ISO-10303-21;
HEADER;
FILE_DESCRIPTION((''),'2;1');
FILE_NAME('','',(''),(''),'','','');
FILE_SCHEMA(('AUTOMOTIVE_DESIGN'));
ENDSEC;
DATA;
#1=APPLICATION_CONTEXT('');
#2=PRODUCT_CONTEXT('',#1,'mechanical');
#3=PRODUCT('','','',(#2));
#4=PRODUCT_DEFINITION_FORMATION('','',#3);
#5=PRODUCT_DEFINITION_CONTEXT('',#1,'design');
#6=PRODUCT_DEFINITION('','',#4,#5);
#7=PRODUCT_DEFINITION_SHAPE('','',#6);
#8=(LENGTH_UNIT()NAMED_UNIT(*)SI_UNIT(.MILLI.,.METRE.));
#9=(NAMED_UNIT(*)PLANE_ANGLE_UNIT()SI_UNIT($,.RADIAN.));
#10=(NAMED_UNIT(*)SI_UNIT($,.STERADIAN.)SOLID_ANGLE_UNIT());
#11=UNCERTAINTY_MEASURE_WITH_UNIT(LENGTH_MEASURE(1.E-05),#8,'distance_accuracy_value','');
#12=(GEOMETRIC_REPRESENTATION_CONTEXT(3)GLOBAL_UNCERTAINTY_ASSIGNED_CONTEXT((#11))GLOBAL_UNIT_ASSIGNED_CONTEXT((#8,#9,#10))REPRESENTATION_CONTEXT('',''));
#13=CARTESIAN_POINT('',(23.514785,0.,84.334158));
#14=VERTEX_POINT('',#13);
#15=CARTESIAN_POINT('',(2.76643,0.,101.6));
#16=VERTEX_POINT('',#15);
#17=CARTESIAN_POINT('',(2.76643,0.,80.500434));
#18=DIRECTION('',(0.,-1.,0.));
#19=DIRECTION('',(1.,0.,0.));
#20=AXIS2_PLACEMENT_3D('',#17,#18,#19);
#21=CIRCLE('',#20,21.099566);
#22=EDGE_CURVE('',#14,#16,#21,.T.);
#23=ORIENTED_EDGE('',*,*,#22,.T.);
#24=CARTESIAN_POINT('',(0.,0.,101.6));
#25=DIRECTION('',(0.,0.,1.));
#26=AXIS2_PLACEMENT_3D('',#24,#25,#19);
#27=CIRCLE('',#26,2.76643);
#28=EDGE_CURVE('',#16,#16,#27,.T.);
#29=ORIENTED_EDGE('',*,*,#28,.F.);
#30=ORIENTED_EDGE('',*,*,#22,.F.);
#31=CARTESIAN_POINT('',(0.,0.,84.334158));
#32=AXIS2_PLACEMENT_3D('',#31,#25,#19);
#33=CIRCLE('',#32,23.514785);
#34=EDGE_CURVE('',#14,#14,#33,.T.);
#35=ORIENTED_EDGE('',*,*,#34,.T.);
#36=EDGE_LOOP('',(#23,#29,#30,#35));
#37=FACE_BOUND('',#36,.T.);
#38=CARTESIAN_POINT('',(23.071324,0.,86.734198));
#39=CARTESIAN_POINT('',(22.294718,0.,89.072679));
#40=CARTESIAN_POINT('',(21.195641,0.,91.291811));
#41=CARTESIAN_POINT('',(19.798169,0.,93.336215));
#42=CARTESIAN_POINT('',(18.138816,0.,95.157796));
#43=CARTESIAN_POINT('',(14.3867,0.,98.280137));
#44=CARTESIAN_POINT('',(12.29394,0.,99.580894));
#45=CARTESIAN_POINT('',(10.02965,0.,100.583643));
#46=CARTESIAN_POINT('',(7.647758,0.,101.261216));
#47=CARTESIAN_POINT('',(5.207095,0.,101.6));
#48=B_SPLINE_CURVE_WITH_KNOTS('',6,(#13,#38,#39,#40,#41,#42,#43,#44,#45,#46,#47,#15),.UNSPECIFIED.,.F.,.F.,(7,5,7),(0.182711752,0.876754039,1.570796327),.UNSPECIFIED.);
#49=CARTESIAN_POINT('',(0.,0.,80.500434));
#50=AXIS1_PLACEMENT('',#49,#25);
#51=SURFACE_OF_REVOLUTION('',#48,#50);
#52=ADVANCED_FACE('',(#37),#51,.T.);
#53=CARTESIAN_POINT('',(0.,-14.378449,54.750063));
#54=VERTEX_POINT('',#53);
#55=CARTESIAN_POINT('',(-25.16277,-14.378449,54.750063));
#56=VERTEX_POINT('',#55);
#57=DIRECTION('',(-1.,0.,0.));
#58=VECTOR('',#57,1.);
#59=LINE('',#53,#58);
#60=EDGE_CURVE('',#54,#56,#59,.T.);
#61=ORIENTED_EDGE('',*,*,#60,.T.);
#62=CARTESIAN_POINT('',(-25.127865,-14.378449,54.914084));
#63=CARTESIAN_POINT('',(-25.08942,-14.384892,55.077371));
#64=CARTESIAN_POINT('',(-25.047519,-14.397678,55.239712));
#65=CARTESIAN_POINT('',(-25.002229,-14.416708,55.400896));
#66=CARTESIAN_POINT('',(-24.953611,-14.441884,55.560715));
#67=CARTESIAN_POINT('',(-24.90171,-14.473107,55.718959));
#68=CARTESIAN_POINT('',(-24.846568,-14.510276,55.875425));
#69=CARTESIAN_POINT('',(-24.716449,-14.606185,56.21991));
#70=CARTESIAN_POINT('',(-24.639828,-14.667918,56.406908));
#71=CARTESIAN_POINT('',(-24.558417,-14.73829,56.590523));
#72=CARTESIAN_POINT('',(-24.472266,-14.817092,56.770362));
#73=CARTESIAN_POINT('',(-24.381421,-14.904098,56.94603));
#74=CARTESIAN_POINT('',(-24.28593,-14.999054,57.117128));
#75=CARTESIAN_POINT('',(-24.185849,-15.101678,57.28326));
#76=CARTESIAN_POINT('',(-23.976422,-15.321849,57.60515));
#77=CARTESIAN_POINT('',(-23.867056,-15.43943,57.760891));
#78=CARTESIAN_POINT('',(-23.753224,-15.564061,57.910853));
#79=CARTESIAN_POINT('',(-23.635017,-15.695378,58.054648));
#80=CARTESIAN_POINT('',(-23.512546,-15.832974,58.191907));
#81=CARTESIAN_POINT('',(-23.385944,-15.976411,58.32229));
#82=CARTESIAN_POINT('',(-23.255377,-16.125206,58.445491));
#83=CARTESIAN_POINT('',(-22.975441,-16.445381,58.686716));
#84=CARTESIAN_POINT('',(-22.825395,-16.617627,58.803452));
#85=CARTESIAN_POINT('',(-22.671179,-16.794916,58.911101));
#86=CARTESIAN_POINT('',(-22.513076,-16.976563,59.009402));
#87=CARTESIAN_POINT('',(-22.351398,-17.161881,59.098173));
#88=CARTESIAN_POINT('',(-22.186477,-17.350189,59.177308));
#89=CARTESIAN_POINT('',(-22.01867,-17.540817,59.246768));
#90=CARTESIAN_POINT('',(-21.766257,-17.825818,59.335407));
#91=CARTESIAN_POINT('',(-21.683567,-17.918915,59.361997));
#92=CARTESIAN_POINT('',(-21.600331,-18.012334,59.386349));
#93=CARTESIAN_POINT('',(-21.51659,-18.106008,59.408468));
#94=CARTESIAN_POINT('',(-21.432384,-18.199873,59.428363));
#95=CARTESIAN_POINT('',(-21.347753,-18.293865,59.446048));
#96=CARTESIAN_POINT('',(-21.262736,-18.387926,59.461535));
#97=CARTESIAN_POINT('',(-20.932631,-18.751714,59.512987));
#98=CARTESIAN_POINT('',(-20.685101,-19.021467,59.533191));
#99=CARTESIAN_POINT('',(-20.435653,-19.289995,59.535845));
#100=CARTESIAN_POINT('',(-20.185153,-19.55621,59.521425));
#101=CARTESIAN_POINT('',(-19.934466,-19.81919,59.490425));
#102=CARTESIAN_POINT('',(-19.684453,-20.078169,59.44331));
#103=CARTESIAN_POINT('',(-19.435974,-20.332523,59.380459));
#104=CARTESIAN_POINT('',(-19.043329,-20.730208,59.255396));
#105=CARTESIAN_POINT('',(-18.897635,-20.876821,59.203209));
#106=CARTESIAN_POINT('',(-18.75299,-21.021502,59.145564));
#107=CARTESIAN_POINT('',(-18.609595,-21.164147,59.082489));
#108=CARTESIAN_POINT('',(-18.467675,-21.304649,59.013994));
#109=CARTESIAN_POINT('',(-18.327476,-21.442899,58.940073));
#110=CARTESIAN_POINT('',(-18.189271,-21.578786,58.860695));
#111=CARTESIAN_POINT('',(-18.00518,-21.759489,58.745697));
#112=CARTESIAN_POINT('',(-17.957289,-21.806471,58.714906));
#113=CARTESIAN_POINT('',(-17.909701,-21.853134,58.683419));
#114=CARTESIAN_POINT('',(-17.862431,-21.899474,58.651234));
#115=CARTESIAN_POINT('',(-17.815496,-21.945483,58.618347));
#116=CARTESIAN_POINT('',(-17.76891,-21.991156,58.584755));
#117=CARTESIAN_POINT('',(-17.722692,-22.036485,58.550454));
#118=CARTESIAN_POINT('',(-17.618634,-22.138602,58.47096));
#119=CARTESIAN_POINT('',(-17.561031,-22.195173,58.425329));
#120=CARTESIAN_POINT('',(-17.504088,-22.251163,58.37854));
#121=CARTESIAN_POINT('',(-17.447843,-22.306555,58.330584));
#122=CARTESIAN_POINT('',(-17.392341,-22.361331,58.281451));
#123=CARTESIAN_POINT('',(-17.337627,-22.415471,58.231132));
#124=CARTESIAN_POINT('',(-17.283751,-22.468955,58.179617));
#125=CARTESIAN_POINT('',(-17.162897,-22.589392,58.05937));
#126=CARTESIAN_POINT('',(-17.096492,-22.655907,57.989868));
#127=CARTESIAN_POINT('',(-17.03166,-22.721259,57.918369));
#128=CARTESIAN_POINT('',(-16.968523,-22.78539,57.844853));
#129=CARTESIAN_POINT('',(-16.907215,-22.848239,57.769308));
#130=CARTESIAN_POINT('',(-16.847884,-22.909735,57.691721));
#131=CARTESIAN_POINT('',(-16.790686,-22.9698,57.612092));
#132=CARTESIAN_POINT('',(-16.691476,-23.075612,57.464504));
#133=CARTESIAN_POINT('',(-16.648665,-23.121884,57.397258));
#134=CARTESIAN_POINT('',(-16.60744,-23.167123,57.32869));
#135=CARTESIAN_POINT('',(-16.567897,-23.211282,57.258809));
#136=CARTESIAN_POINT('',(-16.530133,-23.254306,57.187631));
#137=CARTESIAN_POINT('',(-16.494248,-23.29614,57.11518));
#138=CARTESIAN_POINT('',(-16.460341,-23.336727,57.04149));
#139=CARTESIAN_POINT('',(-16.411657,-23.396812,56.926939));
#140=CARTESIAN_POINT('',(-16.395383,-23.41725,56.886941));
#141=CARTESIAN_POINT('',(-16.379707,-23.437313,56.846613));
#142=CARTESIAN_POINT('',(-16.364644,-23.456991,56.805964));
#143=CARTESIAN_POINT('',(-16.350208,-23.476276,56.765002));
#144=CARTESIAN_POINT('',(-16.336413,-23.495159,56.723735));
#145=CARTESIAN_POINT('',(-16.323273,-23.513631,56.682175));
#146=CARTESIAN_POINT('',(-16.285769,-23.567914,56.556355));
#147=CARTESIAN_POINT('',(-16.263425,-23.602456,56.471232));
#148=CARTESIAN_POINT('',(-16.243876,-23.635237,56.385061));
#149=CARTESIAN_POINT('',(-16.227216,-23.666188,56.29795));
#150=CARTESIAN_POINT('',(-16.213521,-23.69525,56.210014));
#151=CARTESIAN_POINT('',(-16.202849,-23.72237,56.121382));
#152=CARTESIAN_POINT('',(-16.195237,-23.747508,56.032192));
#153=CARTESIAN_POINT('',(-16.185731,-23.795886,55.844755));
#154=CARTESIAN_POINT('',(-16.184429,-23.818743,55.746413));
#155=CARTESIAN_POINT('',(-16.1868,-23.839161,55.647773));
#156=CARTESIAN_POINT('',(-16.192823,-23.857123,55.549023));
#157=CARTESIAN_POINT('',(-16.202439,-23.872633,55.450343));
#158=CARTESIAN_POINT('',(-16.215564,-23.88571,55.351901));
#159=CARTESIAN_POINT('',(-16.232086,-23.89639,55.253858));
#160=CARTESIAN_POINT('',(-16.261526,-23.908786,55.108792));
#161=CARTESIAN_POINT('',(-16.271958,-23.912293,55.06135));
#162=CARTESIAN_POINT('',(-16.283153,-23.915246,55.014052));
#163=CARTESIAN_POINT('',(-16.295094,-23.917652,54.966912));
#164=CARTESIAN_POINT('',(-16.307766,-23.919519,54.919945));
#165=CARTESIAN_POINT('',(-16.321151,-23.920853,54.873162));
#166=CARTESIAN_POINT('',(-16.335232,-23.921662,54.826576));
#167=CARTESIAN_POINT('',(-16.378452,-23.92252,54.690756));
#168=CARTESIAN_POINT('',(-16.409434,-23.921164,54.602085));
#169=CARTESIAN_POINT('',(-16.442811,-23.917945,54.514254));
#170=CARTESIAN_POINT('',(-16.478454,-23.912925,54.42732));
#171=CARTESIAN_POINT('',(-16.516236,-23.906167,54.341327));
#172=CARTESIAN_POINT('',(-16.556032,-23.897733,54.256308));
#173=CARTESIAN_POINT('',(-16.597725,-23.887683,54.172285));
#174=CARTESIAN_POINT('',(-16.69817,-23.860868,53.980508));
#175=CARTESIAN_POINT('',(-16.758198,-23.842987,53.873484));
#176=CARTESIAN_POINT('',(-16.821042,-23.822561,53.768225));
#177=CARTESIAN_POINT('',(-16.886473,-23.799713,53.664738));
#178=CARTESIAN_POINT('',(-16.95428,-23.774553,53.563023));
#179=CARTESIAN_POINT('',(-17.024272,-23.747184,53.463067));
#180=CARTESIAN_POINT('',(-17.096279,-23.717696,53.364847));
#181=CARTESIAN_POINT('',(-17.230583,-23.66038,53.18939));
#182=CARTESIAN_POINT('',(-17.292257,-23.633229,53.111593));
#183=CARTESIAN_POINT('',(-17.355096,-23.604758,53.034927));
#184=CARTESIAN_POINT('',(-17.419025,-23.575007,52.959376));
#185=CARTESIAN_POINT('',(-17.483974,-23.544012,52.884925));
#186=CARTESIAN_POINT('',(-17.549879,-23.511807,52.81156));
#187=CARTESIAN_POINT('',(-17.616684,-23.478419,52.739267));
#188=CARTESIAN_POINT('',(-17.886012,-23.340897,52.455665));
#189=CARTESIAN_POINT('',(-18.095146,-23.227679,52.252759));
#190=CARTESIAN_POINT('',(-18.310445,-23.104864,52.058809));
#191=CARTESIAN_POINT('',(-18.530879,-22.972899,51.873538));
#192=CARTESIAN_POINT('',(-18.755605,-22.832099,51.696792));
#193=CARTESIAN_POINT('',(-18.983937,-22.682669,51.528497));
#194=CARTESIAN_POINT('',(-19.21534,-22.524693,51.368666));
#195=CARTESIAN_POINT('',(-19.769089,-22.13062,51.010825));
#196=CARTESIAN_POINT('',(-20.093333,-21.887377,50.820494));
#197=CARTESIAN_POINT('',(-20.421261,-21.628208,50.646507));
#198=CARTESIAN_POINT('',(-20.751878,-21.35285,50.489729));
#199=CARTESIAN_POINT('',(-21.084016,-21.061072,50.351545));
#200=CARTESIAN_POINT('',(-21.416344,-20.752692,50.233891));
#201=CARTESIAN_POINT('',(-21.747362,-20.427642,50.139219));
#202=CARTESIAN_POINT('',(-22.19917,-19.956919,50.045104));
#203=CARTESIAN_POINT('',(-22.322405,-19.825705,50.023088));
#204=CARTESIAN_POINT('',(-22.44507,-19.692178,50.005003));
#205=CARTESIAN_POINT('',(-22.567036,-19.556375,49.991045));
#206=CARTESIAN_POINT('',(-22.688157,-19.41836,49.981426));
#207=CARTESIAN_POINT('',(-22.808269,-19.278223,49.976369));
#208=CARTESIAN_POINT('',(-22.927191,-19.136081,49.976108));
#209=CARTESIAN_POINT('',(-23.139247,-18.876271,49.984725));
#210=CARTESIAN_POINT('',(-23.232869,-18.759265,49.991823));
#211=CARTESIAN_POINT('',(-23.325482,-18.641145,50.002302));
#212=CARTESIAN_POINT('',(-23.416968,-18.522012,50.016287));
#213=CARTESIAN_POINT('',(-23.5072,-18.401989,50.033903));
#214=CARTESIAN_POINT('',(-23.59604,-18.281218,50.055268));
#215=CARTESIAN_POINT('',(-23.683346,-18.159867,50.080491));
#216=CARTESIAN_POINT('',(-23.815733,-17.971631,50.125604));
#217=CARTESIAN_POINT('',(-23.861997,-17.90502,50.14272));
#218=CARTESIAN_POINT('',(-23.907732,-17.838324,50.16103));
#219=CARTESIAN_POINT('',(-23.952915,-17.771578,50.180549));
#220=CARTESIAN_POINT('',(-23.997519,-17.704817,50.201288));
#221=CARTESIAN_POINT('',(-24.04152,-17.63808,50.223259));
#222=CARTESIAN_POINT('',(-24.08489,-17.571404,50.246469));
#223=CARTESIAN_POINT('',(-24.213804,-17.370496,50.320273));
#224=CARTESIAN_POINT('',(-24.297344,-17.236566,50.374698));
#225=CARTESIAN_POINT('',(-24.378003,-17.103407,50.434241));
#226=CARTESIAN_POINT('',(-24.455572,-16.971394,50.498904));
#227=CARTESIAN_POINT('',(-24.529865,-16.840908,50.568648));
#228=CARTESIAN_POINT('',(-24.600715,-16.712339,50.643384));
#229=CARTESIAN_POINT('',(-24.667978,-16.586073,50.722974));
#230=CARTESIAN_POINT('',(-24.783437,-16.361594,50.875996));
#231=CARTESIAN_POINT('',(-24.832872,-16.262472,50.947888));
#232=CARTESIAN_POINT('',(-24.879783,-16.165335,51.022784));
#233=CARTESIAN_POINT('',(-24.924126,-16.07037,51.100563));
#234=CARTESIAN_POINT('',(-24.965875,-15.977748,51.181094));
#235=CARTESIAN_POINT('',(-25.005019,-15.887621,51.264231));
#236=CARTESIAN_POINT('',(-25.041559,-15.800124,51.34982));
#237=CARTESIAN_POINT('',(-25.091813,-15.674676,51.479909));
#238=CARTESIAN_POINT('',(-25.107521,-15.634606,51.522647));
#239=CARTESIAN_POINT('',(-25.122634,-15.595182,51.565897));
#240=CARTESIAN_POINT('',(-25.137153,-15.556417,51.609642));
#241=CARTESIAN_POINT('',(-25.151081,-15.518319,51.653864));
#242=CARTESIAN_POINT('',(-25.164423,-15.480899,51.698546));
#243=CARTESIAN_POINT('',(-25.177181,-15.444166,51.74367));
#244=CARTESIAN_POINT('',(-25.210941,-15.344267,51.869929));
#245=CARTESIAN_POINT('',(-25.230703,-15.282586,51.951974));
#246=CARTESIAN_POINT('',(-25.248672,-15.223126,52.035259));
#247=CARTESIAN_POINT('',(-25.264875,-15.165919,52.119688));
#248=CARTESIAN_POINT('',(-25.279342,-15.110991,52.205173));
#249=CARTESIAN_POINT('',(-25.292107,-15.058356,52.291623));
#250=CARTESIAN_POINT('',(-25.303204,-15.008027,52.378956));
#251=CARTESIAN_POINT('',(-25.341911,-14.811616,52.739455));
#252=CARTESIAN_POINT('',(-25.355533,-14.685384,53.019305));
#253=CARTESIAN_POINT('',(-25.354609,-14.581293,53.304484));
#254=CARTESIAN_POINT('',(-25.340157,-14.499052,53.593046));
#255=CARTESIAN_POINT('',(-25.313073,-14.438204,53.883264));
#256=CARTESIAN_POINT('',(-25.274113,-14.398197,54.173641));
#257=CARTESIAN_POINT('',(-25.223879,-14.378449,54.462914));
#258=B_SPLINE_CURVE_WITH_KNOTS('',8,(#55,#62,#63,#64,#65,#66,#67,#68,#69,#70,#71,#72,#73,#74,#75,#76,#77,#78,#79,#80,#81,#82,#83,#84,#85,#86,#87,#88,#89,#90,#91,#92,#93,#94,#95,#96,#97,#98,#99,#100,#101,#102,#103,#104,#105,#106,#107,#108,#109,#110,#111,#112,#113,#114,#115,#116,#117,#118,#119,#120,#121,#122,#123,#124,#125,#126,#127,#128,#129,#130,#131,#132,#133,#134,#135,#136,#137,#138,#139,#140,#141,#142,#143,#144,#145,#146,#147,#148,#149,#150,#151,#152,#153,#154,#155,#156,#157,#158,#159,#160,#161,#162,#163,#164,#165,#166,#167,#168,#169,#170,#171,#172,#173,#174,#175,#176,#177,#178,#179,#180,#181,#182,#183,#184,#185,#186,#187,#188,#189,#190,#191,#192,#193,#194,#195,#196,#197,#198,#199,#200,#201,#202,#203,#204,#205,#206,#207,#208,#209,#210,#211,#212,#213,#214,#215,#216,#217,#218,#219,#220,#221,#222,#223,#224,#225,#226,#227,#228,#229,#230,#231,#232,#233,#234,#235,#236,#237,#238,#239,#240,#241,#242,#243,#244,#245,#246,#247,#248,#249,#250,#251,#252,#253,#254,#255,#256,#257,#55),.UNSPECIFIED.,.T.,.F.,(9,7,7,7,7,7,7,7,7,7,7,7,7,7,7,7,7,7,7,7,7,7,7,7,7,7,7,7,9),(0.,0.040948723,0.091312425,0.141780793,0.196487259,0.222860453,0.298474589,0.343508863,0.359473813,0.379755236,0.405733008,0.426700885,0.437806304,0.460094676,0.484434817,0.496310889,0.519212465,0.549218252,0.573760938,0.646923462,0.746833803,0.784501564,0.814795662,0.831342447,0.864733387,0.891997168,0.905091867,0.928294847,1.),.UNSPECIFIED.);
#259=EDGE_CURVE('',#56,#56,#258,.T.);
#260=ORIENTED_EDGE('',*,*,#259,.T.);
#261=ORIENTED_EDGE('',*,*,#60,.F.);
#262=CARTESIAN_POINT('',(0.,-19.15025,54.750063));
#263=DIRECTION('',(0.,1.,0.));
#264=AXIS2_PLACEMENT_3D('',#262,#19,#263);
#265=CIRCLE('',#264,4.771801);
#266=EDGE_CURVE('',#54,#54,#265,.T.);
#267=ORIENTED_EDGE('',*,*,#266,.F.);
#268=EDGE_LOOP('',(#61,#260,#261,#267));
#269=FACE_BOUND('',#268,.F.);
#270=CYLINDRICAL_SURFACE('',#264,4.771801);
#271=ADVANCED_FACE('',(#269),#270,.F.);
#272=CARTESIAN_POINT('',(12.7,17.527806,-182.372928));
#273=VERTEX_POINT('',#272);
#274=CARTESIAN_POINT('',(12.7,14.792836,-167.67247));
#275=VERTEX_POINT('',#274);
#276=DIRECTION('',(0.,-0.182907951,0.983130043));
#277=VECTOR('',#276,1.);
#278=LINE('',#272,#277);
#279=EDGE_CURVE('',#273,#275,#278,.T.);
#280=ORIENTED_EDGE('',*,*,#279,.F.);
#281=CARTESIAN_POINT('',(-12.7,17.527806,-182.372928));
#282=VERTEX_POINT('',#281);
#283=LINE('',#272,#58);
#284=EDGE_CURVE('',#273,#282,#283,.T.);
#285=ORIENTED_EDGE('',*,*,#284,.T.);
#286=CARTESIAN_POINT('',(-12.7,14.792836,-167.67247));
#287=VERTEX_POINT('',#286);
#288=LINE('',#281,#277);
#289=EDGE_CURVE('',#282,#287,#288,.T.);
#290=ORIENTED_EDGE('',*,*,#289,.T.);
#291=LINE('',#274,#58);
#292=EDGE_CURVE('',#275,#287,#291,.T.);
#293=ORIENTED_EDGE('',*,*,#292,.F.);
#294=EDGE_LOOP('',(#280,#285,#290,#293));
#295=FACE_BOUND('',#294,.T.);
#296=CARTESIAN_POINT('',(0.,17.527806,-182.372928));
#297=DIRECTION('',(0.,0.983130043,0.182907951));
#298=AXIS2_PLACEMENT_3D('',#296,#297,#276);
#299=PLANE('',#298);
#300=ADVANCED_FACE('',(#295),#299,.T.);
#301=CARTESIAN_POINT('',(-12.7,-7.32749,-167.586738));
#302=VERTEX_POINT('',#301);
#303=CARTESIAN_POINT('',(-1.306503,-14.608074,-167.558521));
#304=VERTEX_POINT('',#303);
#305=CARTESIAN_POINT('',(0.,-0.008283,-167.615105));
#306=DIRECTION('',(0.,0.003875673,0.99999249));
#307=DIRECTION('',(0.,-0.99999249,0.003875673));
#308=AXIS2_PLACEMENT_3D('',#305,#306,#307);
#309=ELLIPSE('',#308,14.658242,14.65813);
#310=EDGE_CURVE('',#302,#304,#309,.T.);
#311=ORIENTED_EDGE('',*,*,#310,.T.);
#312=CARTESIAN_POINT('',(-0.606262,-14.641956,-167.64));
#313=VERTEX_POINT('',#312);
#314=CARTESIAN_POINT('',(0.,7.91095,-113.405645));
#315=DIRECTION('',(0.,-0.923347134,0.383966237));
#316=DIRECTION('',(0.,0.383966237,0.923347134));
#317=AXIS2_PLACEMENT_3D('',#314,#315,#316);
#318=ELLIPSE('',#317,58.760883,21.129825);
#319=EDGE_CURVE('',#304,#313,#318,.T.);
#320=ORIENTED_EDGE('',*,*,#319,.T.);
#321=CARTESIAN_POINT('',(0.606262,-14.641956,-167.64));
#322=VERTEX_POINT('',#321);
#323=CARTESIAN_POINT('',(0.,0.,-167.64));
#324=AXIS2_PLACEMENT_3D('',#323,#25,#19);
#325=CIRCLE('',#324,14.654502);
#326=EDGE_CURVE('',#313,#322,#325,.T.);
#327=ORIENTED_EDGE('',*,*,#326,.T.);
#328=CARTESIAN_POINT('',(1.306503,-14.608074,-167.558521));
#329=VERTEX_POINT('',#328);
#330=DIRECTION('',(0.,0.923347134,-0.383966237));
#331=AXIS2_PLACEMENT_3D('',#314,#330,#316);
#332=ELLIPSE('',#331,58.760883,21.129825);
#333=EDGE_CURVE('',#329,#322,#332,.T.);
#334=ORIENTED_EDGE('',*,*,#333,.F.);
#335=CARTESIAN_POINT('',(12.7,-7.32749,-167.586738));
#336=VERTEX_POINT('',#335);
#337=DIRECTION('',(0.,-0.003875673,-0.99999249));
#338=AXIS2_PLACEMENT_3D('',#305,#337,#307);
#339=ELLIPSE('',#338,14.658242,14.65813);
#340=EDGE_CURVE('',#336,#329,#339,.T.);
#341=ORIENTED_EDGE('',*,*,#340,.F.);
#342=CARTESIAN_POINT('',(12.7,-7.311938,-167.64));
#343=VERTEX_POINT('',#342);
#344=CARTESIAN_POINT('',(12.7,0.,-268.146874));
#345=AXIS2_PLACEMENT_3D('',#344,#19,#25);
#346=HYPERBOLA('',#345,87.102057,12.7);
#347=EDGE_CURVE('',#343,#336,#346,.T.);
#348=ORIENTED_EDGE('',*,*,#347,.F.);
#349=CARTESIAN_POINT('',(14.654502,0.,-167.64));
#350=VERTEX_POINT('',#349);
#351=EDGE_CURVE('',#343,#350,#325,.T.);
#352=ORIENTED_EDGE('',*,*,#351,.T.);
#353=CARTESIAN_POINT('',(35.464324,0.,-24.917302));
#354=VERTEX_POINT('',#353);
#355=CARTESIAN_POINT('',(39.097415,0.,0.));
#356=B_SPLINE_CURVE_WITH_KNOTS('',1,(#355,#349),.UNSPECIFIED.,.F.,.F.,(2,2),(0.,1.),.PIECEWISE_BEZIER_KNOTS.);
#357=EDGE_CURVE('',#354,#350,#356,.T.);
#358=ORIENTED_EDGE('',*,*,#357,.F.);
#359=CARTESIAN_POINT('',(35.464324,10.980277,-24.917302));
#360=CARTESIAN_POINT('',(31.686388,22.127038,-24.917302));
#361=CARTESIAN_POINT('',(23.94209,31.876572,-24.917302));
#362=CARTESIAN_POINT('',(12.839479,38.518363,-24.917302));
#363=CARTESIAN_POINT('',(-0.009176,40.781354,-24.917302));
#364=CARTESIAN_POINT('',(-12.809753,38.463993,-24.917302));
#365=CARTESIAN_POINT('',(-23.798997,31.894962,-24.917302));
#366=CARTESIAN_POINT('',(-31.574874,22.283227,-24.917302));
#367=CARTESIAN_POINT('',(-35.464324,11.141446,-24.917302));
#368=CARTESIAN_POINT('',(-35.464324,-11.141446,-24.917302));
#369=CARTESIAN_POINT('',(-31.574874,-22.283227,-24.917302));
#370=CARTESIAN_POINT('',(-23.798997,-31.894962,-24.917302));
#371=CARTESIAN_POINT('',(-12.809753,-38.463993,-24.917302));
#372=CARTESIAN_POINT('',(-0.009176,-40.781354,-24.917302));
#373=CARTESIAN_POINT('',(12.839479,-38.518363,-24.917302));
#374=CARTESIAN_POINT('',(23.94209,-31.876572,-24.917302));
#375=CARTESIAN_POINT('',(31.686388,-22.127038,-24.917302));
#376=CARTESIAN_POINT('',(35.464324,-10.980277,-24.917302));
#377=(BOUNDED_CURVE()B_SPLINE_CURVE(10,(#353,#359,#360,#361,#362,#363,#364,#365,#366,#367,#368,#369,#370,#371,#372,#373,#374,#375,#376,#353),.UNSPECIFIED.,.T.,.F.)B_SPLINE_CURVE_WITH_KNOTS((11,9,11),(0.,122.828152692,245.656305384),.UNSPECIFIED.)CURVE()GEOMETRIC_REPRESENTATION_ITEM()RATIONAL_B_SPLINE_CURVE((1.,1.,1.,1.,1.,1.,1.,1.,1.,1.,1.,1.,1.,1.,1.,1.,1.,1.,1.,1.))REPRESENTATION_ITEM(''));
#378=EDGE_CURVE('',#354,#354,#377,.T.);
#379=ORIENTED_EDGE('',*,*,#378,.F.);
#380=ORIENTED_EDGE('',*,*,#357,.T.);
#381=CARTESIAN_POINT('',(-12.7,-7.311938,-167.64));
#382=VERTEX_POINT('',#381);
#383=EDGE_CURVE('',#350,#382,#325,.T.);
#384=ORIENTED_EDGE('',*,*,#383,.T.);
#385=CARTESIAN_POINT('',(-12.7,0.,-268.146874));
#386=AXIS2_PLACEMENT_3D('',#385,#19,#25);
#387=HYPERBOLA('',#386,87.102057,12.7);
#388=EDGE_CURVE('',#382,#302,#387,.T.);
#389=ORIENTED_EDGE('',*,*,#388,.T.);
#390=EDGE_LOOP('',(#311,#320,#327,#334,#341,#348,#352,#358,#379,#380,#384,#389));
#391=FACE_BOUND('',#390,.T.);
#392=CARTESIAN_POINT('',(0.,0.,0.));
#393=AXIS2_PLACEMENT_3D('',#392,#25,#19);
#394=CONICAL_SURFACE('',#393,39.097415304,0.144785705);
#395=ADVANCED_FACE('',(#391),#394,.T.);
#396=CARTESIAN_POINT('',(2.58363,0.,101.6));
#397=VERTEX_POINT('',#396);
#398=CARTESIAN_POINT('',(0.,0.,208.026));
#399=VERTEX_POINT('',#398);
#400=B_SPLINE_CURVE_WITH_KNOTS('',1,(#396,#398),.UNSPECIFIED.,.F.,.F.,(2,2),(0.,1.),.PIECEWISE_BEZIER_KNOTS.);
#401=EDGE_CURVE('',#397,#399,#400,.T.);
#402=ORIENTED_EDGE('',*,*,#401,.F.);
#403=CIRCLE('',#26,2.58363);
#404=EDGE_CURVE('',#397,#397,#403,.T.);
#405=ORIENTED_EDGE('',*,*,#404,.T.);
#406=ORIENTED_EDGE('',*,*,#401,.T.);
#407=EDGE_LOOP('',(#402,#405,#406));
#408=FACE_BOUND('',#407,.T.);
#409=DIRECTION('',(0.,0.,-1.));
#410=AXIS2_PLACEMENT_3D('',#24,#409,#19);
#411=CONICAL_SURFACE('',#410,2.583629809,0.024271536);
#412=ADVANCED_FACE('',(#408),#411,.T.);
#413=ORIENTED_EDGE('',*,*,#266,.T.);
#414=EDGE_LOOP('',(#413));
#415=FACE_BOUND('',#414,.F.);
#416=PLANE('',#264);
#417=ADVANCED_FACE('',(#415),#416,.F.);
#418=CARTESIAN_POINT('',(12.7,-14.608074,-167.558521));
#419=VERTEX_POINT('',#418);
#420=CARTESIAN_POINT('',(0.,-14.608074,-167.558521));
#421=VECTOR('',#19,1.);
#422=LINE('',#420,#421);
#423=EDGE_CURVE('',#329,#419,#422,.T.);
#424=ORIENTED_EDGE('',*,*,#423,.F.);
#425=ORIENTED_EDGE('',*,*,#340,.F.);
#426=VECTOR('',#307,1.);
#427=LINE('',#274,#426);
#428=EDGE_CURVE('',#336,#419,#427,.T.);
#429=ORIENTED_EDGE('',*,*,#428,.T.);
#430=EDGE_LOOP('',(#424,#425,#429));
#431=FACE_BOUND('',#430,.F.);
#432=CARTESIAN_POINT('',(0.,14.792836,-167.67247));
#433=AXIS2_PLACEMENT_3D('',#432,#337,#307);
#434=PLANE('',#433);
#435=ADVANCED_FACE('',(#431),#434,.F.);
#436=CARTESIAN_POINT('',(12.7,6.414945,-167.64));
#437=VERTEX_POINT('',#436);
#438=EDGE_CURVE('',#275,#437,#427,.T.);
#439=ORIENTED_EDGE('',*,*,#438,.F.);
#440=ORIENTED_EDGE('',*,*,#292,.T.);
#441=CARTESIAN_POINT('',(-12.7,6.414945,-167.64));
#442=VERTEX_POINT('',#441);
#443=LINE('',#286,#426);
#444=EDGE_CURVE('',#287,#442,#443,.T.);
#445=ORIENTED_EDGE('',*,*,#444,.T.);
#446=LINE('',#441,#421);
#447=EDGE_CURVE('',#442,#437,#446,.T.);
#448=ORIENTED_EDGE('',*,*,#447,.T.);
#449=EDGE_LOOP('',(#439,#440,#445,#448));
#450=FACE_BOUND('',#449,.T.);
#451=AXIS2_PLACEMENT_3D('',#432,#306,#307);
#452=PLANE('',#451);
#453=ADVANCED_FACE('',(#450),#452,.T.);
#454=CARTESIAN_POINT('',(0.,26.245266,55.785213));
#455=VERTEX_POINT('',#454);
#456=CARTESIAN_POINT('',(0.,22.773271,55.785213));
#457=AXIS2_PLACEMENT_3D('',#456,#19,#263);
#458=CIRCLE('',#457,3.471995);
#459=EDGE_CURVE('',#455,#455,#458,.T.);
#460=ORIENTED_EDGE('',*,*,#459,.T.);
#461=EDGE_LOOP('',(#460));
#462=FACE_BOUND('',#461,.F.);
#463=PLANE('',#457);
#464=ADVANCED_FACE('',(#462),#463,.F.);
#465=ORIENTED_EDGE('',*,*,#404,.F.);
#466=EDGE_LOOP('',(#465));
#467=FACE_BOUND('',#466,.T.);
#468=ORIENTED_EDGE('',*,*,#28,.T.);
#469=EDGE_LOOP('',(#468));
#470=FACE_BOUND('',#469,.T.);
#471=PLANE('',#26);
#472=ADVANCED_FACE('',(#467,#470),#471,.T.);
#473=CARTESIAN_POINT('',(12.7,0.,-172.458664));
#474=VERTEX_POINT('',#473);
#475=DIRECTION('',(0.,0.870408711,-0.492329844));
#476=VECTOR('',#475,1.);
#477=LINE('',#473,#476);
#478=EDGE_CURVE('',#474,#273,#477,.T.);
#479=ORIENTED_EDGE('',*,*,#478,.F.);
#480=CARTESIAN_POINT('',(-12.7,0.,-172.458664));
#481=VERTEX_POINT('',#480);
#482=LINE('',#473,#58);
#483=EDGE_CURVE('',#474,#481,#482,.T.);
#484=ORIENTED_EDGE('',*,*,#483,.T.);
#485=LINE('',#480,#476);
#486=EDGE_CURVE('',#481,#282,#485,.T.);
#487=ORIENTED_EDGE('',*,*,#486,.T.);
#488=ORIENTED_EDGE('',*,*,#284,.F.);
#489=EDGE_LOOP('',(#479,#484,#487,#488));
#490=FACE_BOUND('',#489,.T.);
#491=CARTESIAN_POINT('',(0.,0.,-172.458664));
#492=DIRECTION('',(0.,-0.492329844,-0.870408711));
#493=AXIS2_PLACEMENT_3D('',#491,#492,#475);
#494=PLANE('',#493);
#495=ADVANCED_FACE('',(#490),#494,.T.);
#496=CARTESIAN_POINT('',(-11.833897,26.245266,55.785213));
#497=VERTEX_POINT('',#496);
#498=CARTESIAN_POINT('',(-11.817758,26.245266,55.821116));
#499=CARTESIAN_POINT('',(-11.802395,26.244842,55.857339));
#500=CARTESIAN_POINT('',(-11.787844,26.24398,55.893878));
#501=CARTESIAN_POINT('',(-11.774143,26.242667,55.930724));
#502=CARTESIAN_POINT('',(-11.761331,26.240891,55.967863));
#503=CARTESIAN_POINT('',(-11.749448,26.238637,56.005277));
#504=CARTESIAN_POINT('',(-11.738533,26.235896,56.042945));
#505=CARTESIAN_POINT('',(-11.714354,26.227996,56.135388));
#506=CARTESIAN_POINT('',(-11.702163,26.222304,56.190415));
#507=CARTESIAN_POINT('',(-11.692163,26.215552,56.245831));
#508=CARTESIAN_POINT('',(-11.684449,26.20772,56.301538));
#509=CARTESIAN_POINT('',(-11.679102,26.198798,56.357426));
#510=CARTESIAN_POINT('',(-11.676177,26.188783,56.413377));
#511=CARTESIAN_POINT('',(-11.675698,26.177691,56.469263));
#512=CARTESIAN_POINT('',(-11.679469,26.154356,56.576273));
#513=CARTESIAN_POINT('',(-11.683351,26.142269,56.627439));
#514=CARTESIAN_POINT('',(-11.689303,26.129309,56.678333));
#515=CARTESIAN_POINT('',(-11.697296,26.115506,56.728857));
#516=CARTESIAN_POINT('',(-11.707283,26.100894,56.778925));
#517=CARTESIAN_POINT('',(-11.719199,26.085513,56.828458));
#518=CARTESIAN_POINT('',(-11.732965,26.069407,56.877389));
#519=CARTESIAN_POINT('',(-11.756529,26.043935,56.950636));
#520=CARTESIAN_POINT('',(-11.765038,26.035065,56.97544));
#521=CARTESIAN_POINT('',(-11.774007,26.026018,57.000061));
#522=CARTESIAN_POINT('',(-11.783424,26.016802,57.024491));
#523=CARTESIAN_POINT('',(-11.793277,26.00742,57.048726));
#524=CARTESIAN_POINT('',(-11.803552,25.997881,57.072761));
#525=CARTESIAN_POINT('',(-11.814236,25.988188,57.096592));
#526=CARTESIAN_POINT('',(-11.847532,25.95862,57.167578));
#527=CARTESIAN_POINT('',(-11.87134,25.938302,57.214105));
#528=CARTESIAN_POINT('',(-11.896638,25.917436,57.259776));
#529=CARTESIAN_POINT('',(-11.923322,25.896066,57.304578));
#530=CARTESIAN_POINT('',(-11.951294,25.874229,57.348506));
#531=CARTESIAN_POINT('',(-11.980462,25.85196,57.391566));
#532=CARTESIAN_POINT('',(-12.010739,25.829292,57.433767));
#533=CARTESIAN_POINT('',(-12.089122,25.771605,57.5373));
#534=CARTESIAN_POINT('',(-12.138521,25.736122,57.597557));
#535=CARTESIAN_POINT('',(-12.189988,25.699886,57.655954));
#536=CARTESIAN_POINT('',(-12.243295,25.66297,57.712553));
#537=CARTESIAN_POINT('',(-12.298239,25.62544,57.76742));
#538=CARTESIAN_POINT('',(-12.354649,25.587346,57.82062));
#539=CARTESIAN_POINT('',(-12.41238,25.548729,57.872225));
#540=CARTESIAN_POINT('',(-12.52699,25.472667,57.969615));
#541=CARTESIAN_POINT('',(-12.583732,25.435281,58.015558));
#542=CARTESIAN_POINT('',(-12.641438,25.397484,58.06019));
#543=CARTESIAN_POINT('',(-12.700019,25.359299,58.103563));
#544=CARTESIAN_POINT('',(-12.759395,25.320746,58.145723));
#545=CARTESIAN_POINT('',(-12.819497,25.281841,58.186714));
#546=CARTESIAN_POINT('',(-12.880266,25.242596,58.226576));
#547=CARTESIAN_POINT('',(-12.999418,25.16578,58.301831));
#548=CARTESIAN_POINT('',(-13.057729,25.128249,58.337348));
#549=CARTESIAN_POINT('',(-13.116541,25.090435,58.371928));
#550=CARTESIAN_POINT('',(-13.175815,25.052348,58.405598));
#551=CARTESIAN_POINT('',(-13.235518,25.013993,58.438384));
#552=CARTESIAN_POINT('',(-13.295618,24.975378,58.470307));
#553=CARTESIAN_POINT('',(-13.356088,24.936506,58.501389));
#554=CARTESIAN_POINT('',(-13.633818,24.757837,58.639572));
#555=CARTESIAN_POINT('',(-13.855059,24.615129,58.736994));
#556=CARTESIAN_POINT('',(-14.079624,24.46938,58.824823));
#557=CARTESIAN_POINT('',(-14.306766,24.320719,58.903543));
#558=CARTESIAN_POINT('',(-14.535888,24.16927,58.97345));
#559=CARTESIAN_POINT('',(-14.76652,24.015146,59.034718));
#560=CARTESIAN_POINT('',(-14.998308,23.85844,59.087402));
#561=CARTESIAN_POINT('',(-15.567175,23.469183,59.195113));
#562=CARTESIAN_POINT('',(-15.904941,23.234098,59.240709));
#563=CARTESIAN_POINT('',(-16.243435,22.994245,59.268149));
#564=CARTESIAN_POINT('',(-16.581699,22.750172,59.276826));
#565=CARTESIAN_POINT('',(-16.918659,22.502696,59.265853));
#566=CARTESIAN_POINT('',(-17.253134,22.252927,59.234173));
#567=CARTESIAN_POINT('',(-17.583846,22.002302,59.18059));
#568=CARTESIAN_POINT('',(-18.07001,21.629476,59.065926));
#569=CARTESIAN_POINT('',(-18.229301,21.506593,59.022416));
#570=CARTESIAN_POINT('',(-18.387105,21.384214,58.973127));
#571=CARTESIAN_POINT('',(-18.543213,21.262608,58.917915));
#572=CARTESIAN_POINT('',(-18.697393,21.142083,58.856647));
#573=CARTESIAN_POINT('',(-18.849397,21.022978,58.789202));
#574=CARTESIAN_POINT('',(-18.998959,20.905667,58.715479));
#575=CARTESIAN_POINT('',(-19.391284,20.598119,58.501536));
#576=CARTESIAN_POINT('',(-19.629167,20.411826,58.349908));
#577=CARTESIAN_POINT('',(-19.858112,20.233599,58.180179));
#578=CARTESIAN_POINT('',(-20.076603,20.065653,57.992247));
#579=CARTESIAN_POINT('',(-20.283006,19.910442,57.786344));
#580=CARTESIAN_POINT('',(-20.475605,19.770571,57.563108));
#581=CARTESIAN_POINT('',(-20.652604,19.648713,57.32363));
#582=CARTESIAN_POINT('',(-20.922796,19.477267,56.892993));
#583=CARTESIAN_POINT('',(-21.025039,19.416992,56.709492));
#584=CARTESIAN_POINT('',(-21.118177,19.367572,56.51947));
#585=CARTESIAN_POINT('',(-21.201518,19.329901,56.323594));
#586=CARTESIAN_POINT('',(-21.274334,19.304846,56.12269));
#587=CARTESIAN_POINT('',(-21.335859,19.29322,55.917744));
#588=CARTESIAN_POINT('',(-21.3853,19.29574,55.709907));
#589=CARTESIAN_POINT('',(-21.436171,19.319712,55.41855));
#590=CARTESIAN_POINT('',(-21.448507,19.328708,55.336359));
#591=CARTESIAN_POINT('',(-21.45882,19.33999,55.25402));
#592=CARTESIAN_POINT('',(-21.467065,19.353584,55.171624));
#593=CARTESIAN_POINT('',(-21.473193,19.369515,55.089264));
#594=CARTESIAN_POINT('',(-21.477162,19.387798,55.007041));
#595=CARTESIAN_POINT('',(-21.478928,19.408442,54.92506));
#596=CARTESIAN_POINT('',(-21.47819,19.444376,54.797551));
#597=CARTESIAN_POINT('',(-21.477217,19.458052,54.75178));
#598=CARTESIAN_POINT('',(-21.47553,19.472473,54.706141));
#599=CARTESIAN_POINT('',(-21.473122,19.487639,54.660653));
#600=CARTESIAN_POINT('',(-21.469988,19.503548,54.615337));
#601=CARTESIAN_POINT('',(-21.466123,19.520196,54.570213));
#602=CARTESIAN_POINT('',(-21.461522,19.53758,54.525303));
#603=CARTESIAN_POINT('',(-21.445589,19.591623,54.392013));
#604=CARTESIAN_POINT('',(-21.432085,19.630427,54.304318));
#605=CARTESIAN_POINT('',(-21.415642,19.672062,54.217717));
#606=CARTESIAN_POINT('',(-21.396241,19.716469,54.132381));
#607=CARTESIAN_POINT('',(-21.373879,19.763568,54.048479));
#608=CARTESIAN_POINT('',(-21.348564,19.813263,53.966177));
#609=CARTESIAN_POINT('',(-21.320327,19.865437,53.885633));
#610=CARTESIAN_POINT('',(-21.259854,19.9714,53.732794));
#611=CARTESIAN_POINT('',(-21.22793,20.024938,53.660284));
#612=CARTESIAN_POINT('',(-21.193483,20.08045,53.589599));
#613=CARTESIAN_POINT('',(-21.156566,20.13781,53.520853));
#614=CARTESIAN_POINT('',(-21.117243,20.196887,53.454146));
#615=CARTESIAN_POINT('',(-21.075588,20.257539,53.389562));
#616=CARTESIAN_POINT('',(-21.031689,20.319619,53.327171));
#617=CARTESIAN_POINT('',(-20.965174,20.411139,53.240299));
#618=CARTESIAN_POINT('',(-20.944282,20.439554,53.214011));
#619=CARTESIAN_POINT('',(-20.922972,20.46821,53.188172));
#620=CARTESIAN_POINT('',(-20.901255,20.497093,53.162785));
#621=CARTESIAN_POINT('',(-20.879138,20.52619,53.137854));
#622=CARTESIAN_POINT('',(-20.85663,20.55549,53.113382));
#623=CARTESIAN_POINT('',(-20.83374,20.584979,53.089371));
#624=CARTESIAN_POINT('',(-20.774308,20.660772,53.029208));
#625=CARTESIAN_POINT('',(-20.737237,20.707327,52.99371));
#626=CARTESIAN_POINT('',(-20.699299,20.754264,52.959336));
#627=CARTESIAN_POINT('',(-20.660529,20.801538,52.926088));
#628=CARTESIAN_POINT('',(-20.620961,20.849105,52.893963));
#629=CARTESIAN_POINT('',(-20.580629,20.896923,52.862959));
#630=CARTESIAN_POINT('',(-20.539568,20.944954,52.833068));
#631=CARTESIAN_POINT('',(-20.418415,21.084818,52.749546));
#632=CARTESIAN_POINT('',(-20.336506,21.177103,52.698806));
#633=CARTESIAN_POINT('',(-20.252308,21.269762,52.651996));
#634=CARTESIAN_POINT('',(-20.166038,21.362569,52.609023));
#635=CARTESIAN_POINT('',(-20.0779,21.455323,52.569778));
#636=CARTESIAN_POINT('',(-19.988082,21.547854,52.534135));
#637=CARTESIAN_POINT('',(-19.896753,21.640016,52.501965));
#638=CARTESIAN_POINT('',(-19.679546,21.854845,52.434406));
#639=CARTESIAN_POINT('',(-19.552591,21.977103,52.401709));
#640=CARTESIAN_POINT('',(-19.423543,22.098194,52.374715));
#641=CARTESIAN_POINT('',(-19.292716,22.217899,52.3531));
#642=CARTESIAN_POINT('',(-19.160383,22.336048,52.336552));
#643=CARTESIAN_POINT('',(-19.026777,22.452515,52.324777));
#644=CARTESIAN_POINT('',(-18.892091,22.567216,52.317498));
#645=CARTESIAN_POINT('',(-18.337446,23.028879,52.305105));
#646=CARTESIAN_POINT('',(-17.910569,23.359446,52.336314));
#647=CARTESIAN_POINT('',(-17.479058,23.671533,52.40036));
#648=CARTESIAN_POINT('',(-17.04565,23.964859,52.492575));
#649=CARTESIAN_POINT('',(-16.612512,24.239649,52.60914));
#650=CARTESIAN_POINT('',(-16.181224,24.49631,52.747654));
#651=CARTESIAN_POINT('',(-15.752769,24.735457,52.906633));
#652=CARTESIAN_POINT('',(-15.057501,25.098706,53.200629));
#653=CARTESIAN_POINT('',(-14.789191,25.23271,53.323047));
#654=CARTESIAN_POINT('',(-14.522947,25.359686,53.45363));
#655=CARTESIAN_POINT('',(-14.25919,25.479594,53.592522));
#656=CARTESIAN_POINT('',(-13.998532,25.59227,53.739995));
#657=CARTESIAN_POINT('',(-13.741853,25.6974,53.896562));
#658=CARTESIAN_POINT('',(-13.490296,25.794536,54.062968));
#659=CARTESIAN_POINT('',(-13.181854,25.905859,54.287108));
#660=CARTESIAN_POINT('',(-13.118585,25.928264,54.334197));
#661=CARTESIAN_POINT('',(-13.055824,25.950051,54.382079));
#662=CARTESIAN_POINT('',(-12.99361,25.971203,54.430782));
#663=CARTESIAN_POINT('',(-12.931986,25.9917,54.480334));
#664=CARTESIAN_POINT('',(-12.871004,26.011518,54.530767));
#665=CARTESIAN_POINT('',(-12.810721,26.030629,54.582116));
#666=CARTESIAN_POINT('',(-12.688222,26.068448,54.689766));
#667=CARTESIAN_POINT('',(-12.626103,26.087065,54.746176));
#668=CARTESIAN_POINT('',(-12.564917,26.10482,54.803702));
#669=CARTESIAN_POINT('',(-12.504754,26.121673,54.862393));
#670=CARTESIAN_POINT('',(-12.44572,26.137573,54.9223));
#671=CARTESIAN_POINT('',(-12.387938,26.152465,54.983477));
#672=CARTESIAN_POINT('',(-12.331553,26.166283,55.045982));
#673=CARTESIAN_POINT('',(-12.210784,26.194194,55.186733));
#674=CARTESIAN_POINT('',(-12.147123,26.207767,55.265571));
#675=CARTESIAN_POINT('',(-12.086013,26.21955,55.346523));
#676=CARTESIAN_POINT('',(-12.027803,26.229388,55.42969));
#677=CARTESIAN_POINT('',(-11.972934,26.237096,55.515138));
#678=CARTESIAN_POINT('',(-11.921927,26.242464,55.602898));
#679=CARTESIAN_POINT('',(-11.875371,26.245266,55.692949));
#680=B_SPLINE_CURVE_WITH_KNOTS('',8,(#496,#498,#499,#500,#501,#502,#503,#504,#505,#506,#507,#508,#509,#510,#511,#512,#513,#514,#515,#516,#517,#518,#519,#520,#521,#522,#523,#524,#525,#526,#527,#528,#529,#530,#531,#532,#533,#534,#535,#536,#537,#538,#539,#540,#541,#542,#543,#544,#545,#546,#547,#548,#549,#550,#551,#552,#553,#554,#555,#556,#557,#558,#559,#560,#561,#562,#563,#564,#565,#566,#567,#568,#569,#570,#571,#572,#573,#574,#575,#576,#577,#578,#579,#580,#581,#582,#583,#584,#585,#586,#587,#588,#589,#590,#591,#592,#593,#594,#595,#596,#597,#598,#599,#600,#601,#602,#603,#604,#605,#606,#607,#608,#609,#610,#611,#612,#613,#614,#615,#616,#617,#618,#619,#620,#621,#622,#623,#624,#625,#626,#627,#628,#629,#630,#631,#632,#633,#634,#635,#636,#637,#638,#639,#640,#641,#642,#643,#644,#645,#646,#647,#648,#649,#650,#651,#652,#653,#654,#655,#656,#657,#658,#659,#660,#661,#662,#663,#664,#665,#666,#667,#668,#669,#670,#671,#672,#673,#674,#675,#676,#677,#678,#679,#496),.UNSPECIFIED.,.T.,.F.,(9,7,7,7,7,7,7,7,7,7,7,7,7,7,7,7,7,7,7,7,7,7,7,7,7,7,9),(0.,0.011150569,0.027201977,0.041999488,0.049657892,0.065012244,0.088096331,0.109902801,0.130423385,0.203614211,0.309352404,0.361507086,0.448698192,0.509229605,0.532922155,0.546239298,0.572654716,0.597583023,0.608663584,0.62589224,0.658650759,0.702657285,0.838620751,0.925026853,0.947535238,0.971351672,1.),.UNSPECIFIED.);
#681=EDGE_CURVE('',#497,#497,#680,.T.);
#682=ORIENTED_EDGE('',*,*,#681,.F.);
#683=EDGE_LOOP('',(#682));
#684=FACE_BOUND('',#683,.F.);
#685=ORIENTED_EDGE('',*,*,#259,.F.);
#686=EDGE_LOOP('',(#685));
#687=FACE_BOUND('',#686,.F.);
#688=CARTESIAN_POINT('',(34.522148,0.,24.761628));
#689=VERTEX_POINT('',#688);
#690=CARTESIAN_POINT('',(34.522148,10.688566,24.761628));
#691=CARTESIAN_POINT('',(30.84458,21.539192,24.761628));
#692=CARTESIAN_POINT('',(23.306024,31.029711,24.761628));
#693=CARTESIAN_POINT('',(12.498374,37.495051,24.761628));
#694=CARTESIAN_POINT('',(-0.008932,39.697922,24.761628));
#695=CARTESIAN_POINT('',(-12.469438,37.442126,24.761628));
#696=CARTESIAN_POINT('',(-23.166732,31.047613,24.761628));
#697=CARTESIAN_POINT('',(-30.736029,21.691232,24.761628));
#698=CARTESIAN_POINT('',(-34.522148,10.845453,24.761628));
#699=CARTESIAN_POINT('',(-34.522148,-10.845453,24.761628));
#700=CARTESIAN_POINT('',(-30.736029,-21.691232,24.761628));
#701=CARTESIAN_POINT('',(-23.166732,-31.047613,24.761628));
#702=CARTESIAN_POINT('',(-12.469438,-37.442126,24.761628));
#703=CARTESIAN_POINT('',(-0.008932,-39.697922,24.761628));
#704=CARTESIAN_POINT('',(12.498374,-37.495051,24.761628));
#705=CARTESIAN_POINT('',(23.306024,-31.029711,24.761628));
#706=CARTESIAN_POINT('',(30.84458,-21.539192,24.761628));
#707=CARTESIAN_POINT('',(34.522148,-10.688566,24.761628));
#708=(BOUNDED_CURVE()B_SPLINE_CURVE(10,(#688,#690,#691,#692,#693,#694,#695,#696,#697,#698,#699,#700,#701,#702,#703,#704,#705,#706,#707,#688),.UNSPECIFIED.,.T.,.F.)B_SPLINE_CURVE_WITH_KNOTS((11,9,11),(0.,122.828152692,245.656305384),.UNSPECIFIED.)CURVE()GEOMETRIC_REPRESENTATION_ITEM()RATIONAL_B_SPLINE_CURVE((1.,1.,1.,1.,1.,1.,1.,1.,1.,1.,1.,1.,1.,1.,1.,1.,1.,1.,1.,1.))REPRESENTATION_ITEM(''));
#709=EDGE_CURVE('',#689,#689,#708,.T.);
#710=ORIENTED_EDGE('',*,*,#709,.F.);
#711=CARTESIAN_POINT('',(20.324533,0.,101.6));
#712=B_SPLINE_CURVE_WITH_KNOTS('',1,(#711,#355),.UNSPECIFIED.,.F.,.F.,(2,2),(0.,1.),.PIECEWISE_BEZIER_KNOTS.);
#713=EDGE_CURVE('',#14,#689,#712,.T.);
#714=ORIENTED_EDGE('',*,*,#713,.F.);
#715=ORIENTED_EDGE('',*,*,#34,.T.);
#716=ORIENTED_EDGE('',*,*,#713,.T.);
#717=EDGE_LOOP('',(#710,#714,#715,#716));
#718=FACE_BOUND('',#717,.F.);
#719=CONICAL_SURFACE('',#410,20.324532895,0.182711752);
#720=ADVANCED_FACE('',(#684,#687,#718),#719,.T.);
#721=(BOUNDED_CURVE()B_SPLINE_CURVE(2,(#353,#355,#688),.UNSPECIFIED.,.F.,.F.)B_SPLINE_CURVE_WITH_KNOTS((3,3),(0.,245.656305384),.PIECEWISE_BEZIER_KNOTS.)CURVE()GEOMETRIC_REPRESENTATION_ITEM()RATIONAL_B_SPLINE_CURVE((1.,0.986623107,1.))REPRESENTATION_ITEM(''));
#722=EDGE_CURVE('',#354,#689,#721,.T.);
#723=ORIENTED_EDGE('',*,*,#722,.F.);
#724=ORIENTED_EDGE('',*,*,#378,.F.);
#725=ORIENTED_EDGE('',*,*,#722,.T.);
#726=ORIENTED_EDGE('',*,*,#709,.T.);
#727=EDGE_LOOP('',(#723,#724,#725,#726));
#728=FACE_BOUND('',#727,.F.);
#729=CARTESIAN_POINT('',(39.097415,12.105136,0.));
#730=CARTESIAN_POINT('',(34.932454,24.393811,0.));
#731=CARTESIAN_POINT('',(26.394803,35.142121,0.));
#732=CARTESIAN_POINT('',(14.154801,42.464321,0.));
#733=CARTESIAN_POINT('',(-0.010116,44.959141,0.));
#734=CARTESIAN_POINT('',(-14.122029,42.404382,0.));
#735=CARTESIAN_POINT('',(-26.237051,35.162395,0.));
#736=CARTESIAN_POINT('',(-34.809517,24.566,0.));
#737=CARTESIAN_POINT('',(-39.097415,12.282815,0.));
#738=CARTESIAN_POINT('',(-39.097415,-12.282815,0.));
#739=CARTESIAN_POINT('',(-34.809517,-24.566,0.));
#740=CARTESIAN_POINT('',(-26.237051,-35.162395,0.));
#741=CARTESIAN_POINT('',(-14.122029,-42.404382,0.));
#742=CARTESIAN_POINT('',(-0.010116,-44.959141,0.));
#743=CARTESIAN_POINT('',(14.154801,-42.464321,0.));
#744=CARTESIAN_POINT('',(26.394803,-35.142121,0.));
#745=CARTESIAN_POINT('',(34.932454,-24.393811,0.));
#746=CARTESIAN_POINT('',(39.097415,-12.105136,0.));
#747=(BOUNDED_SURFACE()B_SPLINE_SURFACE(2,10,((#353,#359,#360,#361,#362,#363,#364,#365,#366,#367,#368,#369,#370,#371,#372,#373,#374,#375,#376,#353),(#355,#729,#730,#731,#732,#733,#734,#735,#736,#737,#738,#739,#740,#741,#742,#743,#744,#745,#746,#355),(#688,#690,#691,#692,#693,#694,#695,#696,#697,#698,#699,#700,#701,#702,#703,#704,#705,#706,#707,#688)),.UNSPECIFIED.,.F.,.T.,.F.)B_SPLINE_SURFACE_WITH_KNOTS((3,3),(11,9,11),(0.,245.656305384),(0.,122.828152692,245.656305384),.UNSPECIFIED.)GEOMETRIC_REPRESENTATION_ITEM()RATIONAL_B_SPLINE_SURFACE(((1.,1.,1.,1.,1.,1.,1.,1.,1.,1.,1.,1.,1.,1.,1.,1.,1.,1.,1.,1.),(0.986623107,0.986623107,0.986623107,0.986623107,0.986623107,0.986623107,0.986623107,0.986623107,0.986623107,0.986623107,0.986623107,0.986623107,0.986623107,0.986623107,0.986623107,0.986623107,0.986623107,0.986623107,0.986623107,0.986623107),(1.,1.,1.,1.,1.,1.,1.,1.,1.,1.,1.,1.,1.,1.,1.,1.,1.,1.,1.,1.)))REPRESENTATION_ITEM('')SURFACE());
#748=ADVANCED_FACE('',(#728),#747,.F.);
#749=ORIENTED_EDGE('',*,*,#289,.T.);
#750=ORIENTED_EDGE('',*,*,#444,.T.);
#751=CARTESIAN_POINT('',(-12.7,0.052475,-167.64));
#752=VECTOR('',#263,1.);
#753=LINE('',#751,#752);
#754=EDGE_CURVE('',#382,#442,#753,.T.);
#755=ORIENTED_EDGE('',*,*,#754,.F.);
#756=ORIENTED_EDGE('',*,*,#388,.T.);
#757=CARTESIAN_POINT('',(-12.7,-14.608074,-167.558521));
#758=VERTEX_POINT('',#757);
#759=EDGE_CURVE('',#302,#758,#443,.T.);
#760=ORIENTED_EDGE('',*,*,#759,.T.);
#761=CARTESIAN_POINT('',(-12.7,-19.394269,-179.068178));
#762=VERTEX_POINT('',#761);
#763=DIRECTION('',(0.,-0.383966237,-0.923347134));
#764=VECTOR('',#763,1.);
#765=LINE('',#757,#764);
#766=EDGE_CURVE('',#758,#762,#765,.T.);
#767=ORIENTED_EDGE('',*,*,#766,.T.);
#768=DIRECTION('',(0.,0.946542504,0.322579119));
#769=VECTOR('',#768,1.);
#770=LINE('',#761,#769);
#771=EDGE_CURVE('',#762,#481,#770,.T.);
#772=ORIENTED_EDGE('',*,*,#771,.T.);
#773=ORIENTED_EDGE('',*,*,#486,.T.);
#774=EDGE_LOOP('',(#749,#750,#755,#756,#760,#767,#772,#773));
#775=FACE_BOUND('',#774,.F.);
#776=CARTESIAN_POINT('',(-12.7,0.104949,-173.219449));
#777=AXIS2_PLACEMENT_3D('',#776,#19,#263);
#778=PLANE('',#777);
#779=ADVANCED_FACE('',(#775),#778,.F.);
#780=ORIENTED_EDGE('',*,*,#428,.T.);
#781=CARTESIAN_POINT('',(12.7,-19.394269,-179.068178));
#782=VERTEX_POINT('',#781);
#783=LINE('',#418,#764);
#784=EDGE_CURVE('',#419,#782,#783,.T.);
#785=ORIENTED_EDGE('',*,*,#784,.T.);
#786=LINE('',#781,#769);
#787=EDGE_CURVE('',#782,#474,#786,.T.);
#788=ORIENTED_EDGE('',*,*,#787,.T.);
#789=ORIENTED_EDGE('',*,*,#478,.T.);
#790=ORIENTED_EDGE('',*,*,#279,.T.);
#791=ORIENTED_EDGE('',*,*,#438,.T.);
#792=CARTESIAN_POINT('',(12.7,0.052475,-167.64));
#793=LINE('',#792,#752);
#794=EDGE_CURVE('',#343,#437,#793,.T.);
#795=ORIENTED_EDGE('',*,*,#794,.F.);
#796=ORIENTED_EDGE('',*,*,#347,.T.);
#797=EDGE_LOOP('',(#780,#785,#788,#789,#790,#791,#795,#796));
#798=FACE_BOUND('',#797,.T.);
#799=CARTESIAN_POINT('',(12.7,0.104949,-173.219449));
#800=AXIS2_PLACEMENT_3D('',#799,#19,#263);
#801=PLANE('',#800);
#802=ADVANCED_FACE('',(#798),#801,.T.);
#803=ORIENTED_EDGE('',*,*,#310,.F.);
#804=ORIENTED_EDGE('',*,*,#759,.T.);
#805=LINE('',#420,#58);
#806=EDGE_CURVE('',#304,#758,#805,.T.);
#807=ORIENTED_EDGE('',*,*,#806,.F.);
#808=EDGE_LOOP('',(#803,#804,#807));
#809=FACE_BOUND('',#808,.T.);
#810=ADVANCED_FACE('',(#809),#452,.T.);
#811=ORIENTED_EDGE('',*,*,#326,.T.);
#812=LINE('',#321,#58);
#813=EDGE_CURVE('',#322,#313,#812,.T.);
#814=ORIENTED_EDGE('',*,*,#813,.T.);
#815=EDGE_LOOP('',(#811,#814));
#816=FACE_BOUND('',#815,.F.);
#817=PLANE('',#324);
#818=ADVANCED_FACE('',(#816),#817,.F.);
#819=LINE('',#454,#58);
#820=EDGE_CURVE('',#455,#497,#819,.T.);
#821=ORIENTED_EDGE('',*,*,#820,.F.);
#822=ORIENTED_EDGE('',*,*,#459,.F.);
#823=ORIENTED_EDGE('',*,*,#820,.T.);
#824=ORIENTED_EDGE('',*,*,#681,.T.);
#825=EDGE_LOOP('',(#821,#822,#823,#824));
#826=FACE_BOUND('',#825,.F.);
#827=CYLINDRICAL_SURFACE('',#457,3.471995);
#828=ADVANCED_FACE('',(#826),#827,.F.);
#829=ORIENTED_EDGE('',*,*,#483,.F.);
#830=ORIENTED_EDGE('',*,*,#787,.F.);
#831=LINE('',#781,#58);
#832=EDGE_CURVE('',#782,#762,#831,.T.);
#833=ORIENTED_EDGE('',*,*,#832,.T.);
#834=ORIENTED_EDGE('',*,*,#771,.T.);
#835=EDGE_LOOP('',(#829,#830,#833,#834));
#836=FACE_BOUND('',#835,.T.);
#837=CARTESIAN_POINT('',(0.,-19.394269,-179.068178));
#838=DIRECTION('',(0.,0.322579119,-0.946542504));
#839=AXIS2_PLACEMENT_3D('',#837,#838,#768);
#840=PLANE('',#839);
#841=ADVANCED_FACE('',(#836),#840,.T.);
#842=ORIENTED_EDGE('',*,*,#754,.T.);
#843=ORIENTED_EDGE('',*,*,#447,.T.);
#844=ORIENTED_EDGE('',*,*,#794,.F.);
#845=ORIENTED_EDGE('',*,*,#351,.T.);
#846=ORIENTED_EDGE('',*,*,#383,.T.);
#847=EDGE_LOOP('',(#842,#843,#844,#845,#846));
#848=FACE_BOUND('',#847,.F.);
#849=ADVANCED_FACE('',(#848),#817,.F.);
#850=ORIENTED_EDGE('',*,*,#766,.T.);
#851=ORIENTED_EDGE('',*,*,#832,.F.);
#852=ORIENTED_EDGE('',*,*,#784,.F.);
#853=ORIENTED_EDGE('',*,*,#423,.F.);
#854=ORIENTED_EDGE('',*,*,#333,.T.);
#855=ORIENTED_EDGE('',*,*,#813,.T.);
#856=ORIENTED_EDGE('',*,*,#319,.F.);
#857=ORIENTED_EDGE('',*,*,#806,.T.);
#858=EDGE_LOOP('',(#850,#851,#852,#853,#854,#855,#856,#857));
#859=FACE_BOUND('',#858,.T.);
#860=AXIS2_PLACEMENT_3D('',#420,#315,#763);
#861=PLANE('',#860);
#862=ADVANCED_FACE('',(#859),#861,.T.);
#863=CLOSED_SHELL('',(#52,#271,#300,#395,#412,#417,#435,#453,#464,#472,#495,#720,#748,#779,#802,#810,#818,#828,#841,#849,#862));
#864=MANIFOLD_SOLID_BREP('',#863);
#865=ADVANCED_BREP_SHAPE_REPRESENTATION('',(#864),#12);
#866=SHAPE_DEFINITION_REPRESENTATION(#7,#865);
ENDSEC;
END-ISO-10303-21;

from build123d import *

# Parameters (mm, degrees)
F2_R      = 20.3245328948
F1_R      = 39.0974153035
F4_R      = 21.0995662857
F5_R      = 2.5836298092
F3_FACE_R = 39.0974153035
F10_R     = 14.6545023438
F12_R     = 152.4
F14_DEPTH = 12.7
F15_DEPTH = 12.7
F16_R     = 3.4719949567
F16_R_2   = 4.7718005113
F17_DEPTH = 25.4


with BuildPart() as f3:
    # F2 (on offset) → F3 section 0
    with BuildSketch(Plane.XY.offset(101.6)):
        Circle(F2_R)
    # F1 (on Top) → F3 section 1
    with BuildSketch(Plane.XY):
        Circle(F1_R)
    loft()

    # F4
    f4_edges = [f3.edges().sort_by_distance(p)[0] for p in [
        (-20.324533, 0, 101.6),
    ]]
    fillet(f4_edges, radius=F4_R)

    # F5 (on offset) → F8 section 0
    with BuildSketch(Plane.XY.offset(101.6), mode=Mode.PRIVATE) as f8_s0:
        Circle(F5_R)
    loft([f8_s0.sketch, Vertex(0, 0, 208.026)])

    # F3_face (on face) → F11 section 0
    with BuildSketch(Plane(origin=(0, 0, 0), x_dir=(1, 0, 0), z_dir=(0, 0, -1))):
        Circle(F3_FACE_R)
    # F10 (on offset) → F11 section 1
    with BuildSketch(Plane.XY.offset(-167.64)):
        Circle(F10_R)
    loft()

    # F12
    f12_edges = [f3.edges().sort_by_distance(p)[0] for p in [
        (-39.097415, 0, 0),
    ]]
    fillet(f12_edges, radius=F12_R)

    # F13 (on Right) → F14 (join)
    with BuildSketch(Plane.YZ):
        Polygon((14.7928362712, -167.672470212), (-14.6080739796, -167.5585210323), (-19.3942692131, -179.0681779385), (0, -172.4586635828), (17.5278056413, -182.3729276657), align=None)
    extrude(amount=F14_DEPTH)

    # F13 (on Right) → F15 (join)
    with BuildSketch(Plane.YZ):
        Polygon((14.7928362712, -167.672470212), (-14.6080739796, -167.5585210323), (-19.3942692131, -179.0681779385), (0, -172.4586635828), (17.5278056413, -182.3729276657), align=None)
    extrude(amount=-F15_DEPTH)

    # F16 (on Right) → F17 (cut)
    with BuildSketch(Plane.YZ):
        with Locations((22.7732714266, 55.7852126658)):
            Circle(F16_R)
        with Locations((-19.15024966, 54.7500625253)):
            Circle(F16_R_2)
    extrude(amount=-F17_DEPTH, mode=Mode.SUBTRACT)


solid = f3.part
